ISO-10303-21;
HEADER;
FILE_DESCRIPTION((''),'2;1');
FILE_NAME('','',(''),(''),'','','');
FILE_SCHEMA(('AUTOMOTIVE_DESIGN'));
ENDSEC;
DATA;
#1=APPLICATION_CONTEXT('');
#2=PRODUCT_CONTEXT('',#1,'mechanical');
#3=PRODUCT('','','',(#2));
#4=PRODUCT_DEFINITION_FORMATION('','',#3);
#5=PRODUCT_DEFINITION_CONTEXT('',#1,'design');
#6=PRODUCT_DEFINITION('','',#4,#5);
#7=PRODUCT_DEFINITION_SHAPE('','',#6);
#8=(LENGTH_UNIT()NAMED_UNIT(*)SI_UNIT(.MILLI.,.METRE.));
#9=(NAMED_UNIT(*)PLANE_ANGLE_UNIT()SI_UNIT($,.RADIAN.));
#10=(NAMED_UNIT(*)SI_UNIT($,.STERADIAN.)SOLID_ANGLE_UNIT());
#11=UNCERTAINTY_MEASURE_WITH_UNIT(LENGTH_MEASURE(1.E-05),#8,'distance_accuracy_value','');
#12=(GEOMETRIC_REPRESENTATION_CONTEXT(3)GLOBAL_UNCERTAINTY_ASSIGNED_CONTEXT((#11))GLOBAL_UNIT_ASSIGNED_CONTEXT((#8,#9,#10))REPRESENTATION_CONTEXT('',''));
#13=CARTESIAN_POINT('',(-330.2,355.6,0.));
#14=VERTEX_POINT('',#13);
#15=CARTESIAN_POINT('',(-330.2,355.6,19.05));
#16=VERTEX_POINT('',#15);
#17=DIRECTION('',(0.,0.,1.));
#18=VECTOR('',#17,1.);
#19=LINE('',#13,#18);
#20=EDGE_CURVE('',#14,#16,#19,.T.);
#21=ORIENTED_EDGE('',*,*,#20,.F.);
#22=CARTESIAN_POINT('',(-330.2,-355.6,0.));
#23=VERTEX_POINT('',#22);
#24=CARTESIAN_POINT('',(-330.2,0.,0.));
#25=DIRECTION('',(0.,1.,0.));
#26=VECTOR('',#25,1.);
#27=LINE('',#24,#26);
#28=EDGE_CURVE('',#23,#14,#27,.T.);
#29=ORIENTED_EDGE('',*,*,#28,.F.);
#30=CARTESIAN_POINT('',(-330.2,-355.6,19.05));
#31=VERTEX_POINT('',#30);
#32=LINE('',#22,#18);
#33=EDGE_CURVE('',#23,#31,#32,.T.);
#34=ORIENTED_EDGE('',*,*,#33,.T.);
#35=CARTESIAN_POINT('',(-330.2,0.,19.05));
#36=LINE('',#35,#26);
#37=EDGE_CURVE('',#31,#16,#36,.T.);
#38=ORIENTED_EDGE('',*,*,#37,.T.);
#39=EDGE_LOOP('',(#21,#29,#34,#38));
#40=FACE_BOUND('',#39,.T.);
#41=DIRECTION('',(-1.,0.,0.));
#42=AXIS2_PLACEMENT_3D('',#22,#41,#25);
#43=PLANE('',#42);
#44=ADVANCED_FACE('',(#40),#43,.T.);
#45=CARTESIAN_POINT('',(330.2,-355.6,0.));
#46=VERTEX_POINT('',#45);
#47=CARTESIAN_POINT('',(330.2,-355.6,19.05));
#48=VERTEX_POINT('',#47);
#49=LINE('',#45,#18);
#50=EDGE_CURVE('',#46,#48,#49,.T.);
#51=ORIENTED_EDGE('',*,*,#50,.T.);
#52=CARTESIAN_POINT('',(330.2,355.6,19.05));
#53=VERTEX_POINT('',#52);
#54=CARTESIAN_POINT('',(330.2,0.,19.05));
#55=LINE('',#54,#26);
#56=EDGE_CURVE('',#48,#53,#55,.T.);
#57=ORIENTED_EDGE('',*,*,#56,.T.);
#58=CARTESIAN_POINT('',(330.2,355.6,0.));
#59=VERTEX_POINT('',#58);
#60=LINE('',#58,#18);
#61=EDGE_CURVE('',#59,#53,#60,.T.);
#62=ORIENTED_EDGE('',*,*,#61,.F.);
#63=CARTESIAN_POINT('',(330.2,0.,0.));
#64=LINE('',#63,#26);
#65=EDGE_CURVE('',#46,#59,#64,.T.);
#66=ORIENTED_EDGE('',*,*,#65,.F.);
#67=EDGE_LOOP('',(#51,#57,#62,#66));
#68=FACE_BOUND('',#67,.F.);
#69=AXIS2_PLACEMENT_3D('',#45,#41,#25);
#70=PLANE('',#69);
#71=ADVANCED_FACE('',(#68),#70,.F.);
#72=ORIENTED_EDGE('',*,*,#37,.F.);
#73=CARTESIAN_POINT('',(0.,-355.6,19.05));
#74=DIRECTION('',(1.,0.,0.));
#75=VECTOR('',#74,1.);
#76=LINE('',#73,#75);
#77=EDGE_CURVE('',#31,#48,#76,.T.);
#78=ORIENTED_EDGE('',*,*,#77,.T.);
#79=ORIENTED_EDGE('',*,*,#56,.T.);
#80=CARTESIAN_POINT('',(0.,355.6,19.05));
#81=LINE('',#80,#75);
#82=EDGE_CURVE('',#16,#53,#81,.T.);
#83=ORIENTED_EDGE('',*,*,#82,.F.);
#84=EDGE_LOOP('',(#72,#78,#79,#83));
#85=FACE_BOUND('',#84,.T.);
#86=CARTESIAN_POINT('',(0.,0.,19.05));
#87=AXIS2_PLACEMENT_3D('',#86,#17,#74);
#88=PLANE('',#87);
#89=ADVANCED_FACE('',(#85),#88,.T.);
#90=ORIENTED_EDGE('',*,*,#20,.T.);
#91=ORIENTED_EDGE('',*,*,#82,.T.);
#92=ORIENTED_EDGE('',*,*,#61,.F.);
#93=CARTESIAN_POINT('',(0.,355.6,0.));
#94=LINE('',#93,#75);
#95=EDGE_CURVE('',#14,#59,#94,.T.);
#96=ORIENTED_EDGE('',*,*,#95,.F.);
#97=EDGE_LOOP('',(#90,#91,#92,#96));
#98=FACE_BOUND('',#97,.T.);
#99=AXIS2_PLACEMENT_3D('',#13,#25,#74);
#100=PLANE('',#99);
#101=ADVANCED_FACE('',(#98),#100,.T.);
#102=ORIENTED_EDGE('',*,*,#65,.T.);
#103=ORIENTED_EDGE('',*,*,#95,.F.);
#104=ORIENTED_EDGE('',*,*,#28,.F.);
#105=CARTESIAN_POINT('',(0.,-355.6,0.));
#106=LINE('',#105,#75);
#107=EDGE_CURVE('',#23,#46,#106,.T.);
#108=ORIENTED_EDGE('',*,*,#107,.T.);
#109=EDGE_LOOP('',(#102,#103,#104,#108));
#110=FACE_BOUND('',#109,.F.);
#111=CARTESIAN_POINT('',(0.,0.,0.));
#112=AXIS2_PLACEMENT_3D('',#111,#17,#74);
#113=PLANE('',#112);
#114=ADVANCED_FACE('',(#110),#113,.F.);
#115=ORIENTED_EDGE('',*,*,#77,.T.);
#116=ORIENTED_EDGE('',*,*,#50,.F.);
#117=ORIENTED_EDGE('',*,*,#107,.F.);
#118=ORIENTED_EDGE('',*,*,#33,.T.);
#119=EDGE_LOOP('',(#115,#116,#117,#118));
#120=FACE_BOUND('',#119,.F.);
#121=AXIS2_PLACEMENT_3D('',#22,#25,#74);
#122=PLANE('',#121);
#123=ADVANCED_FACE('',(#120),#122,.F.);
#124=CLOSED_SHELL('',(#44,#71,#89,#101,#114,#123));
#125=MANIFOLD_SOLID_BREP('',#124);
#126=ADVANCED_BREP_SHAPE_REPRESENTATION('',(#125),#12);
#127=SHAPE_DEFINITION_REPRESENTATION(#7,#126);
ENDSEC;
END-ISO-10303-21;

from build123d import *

# Parameters (mm, degrees)
F1_W     = 660.4
F1_H     = 711.2
F2_DEPTH = 19.05


# Not quite as in the source:
# - a variable given as a bare number and used for a length is read in inches; the dataset says mm whatever the document's units were


with BuildPart() as f2:
    # F1 (on Top) → F2 (new body)
    with BuildSketch(Plane.XY):
        Rectangle(F1_W, F1_H)
    extrude(amount=F2_DEPTH)


solid = f2.part
